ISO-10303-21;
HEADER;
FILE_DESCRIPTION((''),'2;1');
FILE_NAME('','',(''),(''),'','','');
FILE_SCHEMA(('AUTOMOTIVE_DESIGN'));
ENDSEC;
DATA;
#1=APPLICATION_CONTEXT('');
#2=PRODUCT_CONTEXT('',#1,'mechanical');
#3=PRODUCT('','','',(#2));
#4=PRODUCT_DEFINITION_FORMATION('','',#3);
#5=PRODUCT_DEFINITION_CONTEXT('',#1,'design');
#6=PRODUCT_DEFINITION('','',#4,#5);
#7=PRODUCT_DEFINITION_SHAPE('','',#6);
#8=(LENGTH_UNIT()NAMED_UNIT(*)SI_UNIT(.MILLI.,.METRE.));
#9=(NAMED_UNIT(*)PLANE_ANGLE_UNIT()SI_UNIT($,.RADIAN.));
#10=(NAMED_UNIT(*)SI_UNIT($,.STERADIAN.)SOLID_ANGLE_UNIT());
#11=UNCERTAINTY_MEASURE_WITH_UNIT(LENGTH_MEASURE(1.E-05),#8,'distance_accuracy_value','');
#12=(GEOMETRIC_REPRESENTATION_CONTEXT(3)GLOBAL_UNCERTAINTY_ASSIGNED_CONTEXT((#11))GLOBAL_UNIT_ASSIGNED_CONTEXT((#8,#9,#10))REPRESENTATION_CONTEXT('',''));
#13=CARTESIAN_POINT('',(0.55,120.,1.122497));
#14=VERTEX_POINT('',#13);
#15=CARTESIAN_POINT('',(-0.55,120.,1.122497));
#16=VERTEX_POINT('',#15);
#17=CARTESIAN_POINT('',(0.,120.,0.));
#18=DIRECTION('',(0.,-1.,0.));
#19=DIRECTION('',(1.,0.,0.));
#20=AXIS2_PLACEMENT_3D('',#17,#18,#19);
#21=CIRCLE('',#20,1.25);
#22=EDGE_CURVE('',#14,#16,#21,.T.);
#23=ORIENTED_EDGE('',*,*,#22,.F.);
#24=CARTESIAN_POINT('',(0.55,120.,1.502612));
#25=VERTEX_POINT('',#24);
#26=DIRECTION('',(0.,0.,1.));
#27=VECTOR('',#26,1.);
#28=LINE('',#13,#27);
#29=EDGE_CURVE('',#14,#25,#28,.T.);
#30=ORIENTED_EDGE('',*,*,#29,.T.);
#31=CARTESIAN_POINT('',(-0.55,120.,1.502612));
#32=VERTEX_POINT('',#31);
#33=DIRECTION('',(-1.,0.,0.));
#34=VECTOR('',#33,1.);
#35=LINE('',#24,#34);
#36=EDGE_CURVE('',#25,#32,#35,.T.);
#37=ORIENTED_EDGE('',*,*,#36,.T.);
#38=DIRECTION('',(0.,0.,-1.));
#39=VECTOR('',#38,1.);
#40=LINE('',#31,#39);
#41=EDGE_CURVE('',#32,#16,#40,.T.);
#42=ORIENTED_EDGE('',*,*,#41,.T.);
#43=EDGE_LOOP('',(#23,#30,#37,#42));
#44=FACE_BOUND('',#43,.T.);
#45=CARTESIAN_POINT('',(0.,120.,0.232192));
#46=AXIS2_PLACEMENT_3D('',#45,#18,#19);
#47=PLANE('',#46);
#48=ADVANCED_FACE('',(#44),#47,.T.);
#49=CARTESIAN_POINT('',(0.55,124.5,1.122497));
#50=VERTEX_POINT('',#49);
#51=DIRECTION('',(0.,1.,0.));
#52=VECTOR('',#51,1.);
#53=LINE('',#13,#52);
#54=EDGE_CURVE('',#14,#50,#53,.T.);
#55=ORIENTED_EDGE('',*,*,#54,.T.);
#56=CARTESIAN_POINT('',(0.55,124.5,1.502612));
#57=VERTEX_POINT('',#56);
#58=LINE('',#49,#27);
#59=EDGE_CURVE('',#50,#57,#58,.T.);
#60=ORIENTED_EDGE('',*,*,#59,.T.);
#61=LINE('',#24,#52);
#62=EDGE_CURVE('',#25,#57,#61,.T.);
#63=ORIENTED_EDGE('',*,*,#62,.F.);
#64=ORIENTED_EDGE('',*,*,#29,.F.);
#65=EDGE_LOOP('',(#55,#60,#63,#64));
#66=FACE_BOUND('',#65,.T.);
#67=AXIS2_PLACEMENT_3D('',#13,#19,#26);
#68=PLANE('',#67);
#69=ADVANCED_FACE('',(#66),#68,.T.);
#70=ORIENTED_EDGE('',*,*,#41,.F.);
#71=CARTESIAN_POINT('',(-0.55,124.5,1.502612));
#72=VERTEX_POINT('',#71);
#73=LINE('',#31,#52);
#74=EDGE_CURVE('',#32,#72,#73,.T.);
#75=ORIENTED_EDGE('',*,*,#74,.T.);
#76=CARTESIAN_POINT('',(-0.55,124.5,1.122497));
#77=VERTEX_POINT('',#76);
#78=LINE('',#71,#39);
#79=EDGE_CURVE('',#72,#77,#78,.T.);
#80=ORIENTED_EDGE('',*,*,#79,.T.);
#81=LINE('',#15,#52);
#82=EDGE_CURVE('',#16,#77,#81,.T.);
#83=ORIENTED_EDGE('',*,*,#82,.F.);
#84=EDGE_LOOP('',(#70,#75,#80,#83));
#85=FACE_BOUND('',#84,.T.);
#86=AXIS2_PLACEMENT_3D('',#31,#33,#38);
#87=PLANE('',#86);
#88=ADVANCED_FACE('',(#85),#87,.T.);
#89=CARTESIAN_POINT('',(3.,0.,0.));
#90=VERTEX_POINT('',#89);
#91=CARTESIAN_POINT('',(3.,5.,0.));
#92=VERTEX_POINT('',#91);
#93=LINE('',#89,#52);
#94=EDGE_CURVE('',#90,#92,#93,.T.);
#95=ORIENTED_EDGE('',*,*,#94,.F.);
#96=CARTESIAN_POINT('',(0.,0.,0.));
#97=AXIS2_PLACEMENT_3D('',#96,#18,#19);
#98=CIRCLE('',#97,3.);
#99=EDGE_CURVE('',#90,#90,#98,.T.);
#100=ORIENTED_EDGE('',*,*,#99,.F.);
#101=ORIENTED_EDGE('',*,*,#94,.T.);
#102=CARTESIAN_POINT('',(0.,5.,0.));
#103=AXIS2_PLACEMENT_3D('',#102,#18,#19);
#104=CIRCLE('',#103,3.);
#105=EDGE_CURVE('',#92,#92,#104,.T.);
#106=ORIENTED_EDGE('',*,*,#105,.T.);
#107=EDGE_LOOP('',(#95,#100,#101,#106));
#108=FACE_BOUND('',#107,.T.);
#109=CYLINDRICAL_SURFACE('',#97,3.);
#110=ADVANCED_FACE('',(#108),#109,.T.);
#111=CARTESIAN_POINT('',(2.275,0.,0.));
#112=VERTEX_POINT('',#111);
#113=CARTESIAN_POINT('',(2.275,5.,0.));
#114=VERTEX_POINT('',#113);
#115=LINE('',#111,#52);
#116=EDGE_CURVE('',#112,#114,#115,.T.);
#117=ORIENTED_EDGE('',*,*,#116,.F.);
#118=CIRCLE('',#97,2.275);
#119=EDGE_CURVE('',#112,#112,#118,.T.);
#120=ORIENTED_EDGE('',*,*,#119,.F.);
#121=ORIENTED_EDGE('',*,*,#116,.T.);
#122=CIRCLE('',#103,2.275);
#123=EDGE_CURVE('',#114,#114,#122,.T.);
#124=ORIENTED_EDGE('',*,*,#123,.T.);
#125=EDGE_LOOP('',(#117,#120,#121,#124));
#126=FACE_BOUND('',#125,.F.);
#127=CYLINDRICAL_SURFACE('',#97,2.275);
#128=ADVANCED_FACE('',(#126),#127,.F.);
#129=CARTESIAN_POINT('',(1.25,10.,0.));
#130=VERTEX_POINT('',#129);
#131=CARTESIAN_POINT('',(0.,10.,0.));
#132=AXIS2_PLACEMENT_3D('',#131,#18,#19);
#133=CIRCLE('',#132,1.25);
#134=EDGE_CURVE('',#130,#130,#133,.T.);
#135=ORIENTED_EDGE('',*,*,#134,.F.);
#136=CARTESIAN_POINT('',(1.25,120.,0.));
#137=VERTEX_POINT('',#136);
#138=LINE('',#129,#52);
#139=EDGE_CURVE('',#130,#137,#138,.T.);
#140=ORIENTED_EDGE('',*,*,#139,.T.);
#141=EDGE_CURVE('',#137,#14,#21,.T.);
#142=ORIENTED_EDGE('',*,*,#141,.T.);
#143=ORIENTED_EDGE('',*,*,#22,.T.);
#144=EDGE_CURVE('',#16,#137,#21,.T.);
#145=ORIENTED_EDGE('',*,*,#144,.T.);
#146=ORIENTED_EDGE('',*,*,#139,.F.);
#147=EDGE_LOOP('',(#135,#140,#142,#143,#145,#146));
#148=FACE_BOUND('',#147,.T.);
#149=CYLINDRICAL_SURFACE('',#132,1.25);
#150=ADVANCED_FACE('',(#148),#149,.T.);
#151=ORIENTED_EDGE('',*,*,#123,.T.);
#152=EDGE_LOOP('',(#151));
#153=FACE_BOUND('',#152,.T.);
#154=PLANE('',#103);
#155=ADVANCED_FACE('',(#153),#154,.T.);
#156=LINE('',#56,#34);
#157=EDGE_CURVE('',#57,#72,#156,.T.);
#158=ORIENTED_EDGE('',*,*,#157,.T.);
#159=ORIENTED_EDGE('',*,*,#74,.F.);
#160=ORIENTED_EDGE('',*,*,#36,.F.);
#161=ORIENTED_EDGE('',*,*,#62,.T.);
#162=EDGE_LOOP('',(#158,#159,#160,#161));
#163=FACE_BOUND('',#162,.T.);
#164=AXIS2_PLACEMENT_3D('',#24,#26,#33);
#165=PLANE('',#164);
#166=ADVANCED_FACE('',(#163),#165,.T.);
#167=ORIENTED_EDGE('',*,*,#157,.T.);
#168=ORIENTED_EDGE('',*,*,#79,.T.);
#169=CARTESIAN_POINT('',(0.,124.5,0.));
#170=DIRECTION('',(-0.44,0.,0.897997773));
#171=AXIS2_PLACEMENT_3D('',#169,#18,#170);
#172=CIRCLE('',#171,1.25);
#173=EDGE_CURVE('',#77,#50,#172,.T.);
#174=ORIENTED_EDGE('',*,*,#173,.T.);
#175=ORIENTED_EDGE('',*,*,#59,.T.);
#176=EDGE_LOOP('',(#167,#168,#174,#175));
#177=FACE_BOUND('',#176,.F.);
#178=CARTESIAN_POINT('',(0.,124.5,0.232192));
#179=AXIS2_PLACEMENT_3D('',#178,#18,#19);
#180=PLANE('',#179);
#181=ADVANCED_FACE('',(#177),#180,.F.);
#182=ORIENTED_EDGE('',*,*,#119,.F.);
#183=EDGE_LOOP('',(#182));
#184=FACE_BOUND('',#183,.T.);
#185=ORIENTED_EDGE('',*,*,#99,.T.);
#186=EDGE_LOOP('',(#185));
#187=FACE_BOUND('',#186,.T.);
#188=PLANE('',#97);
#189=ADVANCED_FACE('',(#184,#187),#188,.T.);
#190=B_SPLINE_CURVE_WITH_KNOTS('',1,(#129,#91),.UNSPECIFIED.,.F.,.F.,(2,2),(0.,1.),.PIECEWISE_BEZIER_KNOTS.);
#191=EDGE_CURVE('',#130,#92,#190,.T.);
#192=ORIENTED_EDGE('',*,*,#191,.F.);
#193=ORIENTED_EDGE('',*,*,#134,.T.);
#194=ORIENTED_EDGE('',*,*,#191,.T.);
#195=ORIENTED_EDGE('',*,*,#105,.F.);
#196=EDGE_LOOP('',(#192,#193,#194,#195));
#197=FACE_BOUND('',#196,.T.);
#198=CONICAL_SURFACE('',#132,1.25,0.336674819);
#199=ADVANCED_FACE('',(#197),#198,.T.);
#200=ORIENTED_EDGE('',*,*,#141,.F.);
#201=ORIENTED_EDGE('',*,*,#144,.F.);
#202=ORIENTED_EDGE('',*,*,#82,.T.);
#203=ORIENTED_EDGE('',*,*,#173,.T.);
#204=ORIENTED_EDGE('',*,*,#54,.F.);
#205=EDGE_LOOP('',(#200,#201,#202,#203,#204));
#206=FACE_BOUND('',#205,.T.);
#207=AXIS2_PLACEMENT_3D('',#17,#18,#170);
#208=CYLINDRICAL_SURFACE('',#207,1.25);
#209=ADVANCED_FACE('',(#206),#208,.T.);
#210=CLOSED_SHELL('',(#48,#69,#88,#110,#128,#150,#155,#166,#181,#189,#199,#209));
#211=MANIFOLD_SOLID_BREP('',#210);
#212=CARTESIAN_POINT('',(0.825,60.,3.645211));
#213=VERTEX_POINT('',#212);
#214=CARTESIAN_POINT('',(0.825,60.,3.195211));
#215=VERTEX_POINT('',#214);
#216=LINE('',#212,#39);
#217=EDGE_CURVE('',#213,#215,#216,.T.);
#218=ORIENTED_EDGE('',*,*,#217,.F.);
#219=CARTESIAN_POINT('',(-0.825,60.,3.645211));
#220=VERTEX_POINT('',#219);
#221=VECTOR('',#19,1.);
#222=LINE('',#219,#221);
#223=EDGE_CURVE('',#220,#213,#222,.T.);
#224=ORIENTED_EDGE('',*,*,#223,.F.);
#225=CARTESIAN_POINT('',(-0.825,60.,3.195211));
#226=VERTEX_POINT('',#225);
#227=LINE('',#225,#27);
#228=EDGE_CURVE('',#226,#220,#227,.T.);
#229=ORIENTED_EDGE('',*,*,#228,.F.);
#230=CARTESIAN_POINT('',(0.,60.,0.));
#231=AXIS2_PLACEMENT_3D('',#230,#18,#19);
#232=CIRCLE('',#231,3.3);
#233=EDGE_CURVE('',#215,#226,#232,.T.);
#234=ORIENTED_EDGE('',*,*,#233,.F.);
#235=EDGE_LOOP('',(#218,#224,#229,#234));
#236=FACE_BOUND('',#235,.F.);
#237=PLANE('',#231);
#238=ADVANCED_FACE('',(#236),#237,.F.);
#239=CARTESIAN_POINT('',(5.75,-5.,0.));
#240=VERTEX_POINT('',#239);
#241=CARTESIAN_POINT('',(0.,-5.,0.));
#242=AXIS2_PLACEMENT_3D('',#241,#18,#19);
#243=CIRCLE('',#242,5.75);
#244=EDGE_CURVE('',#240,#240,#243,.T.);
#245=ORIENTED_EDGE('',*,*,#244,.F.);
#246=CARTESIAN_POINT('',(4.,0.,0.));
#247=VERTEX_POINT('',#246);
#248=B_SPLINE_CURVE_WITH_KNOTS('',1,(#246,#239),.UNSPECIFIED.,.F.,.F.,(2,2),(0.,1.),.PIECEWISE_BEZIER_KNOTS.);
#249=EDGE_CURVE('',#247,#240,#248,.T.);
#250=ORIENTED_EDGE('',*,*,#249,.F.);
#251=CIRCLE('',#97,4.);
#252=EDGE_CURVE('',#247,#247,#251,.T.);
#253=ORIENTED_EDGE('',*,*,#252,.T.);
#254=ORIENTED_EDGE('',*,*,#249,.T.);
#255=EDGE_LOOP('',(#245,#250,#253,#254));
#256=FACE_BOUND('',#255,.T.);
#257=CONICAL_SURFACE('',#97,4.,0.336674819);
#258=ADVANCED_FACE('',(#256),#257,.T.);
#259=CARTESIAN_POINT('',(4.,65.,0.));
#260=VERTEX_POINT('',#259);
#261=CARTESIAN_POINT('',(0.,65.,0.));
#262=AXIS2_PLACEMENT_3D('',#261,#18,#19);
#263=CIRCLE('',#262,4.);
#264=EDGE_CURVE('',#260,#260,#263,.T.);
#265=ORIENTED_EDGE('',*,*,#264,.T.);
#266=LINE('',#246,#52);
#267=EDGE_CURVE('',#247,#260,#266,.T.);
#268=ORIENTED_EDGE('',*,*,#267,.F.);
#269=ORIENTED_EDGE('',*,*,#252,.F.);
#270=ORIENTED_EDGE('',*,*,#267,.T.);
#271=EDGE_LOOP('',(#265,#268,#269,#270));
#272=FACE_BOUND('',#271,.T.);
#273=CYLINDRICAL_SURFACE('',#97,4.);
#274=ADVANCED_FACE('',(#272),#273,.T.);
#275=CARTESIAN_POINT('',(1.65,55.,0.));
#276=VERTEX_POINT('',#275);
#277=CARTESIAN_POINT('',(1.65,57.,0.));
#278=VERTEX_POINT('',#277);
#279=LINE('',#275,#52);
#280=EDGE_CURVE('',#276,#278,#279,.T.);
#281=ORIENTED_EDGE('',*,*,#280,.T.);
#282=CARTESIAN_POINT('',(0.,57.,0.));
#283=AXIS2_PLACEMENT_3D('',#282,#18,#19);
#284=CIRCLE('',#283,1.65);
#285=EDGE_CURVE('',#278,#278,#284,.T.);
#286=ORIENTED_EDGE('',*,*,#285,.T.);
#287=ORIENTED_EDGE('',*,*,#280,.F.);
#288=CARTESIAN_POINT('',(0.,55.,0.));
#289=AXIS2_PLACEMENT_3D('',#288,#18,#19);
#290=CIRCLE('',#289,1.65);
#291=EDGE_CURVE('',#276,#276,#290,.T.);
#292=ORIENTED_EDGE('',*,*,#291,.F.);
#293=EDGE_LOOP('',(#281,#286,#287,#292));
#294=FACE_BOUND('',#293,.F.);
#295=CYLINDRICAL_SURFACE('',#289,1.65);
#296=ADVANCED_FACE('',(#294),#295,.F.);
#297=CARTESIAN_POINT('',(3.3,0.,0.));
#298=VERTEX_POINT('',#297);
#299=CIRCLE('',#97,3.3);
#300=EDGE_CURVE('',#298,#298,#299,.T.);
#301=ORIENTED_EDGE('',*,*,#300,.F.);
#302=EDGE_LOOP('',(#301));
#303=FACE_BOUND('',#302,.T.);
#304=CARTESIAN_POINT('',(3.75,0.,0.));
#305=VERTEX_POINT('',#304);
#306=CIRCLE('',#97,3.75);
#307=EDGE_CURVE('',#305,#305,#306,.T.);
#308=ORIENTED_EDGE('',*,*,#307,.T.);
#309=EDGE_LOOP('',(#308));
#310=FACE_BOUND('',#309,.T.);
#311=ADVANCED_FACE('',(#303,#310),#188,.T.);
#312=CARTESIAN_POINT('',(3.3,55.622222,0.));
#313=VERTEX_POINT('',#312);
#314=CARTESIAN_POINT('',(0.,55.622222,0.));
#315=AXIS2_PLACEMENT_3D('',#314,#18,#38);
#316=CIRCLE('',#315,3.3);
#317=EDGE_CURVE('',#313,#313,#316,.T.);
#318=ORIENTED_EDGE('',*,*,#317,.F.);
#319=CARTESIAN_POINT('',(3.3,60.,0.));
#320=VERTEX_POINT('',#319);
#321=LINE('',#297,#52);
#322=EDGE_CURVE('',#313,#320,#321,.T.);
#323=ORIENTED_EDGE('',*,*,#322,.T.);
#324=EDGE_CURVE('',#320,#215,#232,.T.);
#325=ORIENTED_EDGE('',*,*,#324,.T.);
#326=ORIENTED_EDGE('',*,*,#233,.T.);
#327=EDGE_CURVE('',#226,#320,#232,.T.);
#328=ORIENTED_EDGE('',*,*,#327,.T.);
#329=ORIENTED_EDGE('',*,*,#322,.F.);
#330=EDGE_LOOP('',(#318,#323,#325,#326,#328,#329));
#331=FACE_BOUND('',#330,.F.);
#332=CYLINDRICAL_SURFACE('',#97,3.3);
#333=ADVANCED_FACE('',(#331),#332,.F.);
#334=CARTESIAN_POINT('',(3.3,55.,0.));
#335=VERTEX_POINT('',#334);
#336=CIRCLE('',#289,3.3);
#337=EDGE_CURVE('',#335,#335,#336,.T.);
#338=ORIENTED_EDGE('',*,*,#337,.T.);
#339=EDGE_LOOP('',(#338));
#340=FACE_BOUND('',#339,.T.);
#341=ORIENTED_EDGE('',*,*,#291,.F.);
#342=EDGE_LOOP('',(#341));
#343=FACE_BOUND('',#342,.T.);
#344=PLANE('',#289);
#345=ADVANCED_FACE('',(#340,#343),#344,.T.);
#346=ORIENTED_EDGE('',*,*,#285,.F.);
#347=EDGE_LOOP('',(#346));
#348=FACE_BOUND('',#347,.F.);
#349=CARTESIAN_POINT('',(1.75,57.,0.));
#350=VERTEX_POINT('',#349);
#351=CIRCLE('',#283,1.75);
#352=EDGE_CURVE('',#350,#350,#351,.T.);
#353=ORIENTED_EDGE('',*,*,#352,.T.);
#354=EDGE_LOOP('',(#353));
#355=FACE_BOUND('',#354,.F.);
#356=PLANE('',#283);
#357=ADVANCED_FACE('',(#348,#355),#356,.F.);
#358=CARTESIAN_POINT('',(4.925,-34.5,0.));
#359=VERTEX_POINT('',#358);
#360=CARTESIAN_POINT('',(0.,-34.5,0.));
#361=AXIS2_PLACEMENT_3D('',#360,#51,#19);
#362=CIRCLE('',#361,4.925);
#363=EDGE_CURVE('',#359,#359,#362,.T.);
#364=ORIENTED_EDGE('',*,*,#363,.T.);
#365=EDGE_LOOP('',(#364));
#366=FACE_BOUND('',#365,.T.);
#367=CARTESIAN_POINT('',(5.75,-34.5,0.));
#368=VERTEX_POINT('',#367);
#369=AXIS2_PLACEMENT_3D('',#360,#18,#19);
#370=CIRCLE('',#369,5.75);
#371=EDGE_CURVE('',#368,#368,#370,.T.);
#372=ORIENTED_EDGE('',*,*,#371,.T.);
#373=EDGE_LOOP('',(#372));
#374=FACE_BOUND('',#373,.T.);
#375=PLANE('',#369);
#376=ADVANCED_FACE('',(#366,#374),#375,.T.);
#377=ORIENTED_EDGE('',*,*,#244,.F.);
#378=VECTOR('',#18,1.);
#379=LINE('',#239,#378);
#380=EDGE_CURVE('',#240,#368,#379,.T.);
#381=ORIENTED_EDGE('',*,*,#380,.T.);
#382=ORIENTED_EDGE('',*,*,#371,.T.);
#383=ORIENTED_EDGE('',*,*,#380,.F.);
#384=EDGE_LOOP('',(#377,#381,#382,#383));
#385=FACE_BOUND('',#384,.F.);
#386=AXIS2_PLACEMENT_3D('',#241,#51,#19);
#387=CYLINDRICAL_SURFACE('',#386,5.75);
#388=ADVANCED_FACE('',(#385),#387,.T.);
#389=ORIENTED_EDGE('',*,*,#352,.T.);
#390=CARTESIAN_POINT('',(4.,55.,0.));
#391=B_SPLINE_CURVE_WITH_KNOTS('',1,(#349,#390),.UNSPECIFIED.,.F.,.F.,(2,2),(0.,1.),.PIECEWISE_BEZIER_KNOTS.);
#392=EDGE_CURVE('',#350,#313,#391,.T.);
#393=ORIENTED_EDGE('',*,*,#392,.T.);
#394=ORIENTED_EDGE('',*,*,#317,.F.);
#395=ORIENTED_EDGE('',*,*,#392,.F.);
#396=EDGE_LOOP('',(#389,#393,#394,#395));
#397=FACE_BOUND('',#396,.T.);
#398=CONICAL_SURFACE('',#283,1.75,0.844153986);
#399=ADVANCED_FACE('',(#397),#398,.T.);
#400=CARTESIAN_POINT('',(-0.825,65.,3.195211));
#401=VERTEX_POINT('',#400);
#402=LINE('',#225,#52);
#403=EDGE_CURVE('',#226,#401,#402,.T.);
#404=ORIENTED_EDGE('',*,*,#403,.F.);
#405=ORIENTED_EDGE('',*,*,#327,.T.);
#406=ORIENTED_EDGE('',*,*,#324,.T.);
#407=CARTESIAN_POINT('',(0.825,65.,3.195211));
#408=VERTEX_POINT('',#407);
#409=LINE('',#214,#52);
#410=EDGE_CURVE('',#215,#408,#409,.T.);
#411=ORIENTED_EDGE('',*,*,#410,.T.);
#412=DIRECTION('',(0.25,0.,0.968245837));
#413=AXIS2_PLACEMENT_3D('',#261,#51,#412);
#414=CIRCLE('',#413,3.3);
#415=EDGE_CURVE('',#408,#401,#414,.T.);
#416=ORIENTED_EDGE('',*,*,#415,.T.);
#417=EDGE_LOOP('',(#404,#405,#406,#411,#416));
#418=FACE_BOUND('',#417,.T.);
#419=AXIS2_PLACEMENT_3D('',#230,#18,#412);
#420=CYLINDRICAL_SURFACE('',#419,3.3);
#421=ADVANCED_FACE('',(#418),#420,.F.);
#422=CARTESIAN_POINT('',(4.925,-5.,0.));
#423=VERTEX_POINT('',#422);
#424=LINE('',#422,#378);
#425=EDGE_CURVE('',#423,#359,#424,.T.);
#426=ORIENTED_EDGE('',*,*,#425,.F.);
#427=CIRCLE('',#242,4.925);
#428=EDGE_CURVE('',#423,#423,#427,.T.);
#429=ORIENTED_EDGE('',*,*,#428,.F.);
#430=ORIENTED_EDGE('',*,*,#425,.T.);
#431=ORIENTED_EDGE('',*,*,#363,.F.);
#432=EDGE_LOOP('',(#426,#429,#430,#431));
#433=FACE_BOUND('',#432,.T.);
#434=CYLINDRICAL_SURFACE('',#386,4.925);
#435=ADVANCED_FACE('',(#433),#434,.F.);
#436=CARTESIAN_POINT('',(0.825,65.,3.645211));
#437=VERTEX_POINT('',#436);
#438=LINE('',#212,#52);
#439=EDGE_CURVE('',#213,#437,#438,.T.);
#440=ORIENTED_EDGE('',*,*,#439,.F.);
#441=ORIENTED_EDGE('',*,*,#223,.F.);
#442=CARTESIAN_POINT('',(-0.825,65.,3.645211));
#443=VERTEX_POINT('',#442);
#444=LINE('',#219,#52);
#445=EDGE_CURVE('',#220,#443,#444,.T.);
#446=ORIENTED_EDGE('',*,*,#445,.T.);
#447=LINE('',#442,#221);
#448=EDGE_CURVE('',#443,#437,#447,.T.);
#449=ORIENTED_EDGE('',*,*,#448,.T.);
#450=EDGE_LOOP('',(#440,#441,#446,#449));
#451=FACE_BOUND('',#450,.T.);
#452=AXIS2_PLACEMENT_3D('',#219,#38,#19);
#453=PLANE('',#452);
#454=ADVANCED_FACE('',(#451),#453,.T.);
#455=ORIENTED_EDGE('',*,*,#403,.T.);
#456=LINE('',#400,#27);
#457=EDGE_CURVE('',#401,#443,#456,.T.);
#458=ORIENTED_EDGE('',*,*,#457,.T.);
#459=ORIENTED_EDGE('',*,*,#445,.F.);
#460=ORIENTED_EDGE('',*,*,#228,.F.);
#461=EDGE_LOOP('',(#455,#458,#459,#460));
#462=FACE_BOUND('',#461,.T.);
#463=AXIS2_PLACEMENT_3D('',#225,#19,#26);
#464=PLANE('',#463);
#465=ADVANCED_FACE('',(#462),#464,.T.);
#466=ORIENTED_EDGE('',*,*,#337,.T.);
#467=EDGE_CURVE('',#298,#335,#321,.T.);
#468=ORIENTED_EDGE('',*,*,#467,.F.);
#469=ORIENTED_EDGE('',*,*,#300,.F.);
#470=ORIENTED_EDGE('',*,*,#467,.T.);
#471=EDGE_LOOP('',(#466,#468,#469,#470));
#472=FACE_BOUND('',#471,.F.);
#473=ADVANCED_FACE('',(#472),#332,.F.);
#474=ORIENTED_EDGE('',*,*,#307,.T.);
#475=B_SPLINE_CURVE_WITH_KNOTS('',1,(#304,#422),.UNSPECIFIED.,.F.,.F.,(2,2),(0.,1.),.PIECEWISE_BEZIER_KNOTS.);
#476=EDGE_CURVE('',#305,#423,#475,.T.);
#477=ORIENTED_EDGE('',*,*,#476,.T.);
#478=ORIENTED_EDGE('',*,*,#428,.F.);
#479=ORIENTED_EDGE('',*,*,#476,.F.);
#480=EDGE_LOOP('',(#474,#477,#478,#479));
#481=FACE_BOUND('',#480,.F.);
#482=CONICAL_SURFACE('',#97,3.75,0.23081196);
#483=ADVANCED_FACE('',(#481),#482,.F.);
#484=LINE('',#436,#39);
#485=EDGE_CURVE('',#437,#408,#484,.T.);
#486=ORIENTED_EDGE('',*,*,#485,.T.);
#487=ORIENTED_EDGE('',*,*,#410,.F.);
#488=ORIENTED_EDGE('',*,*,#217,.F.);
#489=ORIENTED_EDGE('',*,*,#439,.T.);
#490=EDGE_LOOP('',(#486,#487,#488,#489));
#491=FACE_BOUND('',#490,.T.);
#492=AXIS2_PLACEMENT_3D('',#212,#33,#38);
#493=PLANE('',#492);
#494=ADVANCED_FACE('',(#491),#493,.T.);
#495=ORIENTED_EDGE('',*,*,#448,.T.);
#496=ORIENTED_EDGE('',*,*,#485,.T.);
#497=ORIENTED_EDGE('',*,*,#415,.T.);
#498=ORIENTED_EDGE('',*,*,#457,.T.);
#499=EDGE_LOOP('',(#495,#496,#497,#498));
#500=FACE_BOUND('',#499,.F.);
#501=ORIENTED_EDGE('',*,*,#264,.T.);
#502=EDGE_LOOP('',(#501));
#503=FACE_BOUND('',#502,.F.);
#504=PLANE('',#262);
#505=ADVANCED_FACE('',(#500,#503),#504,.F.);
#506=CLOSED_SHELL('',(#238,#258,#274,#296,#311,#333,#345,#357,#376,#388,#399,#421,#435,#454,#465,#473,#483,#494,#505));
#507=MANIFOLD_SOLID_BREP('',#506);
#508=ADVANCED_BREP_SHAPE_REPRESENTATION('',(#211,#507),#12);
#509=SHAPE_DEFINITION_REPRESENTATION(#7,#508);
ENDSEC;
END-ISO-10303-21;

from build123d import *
from build123d import SkipClean  # not in build123d's __all__

# Parameters (mm, degrees)
F0_R      = 3
F0_R_2    = 2.275
F1_DEPTH  = 5
F5_R      = 1.25
F3_R      = 3
F7_DEPTH  = 110
F12_DEPTH = 4.5
F13_R     = 4
F13_R_2   = 3.3
F14_DEPTH = 60
F16_R     = 1.75
F18_R     = 4
F20_R     = 1.65
F21_DEPTH = 5
F23_R     = 4
F24_DEPTH = 5
F28_R     = 4
F27_R     = 5.75
F30_R     = 3.75
F31_R     = 4.925
F33_DEPTH = 29.5
F34_DEPTH = 29.6


# Not quite as in the source:
# - after a boolean that leaves OpenCascade's solid faulty, fix() repairs it


with BuildPart() as f1:
    # F0 (on Front) → F1 (new body)
    with BuildSketch(Plane.XZ):
        Circle(F0_R)
        Circle(F0_R_2, mode=Mode.SUBTRACT)
    extrude(amount=-F1_DEPTH)

    # F5 (on offset) → F6 section 0
    with BuildSketch(Plane.XZ.offset(-10)):
        Circle(F5_R)
    # F3 (on offset) → F6 section 1
    with BuildSketch(Plane.XZ.offset(-5)):
        Circle(F3_R)
    loft()

    # F5 (on offset) → F7 (join)
    with BuildSketch(Plane.XZ.offset(-10)):
        Circle(F5_R)
    extrude(amount=-F7_DEPTH)

    # F9 (on offset) → F12 (join)
    with BuildSketch(Plane.XZ.offset(-120)):
        with BuildLine():
            Line((-0.55, 1.5026115235), (-0.55, 1.122497216))
            ThreePointArc((-0.55, 1.122497216), (0, -1.25), (0.55, 1.122497216))
            Line((0.55, 1.122497216), (0.55, 1.5026115235))
            Line((0.55, 1.5026115235), (-0.55, 1.5026115235))
        make_face()
    extrude(amount=-F12_DEPTH)


with BuildPart() as f14:
    # F13 (on Front) → F14 (new body)
    with BuildSketch(Plane.XZ):
        Circle(F13_R)
        Circle(F13_R_2, mode=Mode.SUBTRACT)
    extrude(amount=-F14_DEPTH)

    # F16 (on offset) → F19 section 0
    with BuildSketch(Plane.XZ.offset(-57)):
        Circle(F16_R)
    # F18 (on offset) → F19 section 1
    with BuildSketch(Plane.XZ.offset(-55)):
        Circle(F18_R)
    loft()

    # F20 (on offset) → F21 (cut)
    with BuildSketch(Plane.XZ.offset(-55)):
        Circle(F20_R)
    extrude(amount=-F21_DEPTH, mode=Mode.SUBTRACT)

    # F23 (on offset) → F24 (join)
    with BuildSketch(Plane.XZ.offset(-60)):
        Circle(F23_R)
        with BuildLine():
            ThreePointArc((0.825, 3.1952112606), (0, -3.3), (-0.825, 3.1952112606))
            Line((-0.825, 3.1952112606), (-0.825, 3.6452112606))
            Line((-0.825, 3.6452112606), (0.825, 3.6452112606))
            Line((0.825, 3.6452112606), (0.825, 3.1952112606))
        make_face(mode=Mode.SUBTRACT)
    with SkipClean():  # cleaning this boolean's faces spoils the solid; the shape is the same uncleaned
        extrude(amount=-F24_DEPTH)

    # F28 (on Front) → F29 section 0
    with BuildSketch(Plane.XZ):
        Circle(F28_R)
    # F27 (on offset) → F29 section 1
    with BuildSketch(Plane.XZ.offset(5)):
        Circle(F27_R)
    loft()

    add(f14.part.fix(), mode=Mode.REPLACE)

    # F30 (on Front) → F32 section 0
    with BuildSketch(Plane.XZ):
        Circle(F30_R)
    # F31 (on offset) → F32 section 1
    with BuildSketch(Plane.XZ.offset(5)):
        Circle(F31_R)
    loft(mode=Mode.SUBTRACT)

    # F27 (on offset) → F33 (join)
    with BuildSketch(Plane.XZ.offset(5)):
        Circle(F27_R)
    extrude(amount=F33_DEPTH)

    # F31 (on offset) → F34 (cut)
    with BuildSketch(Plane.XZ.offset(5)):
        Circle(F31_R)
    extrude(amount=F34_DEPTH, mode=Mode.SUBTRACT)


solid = Compound([f1.part, f14.part])
